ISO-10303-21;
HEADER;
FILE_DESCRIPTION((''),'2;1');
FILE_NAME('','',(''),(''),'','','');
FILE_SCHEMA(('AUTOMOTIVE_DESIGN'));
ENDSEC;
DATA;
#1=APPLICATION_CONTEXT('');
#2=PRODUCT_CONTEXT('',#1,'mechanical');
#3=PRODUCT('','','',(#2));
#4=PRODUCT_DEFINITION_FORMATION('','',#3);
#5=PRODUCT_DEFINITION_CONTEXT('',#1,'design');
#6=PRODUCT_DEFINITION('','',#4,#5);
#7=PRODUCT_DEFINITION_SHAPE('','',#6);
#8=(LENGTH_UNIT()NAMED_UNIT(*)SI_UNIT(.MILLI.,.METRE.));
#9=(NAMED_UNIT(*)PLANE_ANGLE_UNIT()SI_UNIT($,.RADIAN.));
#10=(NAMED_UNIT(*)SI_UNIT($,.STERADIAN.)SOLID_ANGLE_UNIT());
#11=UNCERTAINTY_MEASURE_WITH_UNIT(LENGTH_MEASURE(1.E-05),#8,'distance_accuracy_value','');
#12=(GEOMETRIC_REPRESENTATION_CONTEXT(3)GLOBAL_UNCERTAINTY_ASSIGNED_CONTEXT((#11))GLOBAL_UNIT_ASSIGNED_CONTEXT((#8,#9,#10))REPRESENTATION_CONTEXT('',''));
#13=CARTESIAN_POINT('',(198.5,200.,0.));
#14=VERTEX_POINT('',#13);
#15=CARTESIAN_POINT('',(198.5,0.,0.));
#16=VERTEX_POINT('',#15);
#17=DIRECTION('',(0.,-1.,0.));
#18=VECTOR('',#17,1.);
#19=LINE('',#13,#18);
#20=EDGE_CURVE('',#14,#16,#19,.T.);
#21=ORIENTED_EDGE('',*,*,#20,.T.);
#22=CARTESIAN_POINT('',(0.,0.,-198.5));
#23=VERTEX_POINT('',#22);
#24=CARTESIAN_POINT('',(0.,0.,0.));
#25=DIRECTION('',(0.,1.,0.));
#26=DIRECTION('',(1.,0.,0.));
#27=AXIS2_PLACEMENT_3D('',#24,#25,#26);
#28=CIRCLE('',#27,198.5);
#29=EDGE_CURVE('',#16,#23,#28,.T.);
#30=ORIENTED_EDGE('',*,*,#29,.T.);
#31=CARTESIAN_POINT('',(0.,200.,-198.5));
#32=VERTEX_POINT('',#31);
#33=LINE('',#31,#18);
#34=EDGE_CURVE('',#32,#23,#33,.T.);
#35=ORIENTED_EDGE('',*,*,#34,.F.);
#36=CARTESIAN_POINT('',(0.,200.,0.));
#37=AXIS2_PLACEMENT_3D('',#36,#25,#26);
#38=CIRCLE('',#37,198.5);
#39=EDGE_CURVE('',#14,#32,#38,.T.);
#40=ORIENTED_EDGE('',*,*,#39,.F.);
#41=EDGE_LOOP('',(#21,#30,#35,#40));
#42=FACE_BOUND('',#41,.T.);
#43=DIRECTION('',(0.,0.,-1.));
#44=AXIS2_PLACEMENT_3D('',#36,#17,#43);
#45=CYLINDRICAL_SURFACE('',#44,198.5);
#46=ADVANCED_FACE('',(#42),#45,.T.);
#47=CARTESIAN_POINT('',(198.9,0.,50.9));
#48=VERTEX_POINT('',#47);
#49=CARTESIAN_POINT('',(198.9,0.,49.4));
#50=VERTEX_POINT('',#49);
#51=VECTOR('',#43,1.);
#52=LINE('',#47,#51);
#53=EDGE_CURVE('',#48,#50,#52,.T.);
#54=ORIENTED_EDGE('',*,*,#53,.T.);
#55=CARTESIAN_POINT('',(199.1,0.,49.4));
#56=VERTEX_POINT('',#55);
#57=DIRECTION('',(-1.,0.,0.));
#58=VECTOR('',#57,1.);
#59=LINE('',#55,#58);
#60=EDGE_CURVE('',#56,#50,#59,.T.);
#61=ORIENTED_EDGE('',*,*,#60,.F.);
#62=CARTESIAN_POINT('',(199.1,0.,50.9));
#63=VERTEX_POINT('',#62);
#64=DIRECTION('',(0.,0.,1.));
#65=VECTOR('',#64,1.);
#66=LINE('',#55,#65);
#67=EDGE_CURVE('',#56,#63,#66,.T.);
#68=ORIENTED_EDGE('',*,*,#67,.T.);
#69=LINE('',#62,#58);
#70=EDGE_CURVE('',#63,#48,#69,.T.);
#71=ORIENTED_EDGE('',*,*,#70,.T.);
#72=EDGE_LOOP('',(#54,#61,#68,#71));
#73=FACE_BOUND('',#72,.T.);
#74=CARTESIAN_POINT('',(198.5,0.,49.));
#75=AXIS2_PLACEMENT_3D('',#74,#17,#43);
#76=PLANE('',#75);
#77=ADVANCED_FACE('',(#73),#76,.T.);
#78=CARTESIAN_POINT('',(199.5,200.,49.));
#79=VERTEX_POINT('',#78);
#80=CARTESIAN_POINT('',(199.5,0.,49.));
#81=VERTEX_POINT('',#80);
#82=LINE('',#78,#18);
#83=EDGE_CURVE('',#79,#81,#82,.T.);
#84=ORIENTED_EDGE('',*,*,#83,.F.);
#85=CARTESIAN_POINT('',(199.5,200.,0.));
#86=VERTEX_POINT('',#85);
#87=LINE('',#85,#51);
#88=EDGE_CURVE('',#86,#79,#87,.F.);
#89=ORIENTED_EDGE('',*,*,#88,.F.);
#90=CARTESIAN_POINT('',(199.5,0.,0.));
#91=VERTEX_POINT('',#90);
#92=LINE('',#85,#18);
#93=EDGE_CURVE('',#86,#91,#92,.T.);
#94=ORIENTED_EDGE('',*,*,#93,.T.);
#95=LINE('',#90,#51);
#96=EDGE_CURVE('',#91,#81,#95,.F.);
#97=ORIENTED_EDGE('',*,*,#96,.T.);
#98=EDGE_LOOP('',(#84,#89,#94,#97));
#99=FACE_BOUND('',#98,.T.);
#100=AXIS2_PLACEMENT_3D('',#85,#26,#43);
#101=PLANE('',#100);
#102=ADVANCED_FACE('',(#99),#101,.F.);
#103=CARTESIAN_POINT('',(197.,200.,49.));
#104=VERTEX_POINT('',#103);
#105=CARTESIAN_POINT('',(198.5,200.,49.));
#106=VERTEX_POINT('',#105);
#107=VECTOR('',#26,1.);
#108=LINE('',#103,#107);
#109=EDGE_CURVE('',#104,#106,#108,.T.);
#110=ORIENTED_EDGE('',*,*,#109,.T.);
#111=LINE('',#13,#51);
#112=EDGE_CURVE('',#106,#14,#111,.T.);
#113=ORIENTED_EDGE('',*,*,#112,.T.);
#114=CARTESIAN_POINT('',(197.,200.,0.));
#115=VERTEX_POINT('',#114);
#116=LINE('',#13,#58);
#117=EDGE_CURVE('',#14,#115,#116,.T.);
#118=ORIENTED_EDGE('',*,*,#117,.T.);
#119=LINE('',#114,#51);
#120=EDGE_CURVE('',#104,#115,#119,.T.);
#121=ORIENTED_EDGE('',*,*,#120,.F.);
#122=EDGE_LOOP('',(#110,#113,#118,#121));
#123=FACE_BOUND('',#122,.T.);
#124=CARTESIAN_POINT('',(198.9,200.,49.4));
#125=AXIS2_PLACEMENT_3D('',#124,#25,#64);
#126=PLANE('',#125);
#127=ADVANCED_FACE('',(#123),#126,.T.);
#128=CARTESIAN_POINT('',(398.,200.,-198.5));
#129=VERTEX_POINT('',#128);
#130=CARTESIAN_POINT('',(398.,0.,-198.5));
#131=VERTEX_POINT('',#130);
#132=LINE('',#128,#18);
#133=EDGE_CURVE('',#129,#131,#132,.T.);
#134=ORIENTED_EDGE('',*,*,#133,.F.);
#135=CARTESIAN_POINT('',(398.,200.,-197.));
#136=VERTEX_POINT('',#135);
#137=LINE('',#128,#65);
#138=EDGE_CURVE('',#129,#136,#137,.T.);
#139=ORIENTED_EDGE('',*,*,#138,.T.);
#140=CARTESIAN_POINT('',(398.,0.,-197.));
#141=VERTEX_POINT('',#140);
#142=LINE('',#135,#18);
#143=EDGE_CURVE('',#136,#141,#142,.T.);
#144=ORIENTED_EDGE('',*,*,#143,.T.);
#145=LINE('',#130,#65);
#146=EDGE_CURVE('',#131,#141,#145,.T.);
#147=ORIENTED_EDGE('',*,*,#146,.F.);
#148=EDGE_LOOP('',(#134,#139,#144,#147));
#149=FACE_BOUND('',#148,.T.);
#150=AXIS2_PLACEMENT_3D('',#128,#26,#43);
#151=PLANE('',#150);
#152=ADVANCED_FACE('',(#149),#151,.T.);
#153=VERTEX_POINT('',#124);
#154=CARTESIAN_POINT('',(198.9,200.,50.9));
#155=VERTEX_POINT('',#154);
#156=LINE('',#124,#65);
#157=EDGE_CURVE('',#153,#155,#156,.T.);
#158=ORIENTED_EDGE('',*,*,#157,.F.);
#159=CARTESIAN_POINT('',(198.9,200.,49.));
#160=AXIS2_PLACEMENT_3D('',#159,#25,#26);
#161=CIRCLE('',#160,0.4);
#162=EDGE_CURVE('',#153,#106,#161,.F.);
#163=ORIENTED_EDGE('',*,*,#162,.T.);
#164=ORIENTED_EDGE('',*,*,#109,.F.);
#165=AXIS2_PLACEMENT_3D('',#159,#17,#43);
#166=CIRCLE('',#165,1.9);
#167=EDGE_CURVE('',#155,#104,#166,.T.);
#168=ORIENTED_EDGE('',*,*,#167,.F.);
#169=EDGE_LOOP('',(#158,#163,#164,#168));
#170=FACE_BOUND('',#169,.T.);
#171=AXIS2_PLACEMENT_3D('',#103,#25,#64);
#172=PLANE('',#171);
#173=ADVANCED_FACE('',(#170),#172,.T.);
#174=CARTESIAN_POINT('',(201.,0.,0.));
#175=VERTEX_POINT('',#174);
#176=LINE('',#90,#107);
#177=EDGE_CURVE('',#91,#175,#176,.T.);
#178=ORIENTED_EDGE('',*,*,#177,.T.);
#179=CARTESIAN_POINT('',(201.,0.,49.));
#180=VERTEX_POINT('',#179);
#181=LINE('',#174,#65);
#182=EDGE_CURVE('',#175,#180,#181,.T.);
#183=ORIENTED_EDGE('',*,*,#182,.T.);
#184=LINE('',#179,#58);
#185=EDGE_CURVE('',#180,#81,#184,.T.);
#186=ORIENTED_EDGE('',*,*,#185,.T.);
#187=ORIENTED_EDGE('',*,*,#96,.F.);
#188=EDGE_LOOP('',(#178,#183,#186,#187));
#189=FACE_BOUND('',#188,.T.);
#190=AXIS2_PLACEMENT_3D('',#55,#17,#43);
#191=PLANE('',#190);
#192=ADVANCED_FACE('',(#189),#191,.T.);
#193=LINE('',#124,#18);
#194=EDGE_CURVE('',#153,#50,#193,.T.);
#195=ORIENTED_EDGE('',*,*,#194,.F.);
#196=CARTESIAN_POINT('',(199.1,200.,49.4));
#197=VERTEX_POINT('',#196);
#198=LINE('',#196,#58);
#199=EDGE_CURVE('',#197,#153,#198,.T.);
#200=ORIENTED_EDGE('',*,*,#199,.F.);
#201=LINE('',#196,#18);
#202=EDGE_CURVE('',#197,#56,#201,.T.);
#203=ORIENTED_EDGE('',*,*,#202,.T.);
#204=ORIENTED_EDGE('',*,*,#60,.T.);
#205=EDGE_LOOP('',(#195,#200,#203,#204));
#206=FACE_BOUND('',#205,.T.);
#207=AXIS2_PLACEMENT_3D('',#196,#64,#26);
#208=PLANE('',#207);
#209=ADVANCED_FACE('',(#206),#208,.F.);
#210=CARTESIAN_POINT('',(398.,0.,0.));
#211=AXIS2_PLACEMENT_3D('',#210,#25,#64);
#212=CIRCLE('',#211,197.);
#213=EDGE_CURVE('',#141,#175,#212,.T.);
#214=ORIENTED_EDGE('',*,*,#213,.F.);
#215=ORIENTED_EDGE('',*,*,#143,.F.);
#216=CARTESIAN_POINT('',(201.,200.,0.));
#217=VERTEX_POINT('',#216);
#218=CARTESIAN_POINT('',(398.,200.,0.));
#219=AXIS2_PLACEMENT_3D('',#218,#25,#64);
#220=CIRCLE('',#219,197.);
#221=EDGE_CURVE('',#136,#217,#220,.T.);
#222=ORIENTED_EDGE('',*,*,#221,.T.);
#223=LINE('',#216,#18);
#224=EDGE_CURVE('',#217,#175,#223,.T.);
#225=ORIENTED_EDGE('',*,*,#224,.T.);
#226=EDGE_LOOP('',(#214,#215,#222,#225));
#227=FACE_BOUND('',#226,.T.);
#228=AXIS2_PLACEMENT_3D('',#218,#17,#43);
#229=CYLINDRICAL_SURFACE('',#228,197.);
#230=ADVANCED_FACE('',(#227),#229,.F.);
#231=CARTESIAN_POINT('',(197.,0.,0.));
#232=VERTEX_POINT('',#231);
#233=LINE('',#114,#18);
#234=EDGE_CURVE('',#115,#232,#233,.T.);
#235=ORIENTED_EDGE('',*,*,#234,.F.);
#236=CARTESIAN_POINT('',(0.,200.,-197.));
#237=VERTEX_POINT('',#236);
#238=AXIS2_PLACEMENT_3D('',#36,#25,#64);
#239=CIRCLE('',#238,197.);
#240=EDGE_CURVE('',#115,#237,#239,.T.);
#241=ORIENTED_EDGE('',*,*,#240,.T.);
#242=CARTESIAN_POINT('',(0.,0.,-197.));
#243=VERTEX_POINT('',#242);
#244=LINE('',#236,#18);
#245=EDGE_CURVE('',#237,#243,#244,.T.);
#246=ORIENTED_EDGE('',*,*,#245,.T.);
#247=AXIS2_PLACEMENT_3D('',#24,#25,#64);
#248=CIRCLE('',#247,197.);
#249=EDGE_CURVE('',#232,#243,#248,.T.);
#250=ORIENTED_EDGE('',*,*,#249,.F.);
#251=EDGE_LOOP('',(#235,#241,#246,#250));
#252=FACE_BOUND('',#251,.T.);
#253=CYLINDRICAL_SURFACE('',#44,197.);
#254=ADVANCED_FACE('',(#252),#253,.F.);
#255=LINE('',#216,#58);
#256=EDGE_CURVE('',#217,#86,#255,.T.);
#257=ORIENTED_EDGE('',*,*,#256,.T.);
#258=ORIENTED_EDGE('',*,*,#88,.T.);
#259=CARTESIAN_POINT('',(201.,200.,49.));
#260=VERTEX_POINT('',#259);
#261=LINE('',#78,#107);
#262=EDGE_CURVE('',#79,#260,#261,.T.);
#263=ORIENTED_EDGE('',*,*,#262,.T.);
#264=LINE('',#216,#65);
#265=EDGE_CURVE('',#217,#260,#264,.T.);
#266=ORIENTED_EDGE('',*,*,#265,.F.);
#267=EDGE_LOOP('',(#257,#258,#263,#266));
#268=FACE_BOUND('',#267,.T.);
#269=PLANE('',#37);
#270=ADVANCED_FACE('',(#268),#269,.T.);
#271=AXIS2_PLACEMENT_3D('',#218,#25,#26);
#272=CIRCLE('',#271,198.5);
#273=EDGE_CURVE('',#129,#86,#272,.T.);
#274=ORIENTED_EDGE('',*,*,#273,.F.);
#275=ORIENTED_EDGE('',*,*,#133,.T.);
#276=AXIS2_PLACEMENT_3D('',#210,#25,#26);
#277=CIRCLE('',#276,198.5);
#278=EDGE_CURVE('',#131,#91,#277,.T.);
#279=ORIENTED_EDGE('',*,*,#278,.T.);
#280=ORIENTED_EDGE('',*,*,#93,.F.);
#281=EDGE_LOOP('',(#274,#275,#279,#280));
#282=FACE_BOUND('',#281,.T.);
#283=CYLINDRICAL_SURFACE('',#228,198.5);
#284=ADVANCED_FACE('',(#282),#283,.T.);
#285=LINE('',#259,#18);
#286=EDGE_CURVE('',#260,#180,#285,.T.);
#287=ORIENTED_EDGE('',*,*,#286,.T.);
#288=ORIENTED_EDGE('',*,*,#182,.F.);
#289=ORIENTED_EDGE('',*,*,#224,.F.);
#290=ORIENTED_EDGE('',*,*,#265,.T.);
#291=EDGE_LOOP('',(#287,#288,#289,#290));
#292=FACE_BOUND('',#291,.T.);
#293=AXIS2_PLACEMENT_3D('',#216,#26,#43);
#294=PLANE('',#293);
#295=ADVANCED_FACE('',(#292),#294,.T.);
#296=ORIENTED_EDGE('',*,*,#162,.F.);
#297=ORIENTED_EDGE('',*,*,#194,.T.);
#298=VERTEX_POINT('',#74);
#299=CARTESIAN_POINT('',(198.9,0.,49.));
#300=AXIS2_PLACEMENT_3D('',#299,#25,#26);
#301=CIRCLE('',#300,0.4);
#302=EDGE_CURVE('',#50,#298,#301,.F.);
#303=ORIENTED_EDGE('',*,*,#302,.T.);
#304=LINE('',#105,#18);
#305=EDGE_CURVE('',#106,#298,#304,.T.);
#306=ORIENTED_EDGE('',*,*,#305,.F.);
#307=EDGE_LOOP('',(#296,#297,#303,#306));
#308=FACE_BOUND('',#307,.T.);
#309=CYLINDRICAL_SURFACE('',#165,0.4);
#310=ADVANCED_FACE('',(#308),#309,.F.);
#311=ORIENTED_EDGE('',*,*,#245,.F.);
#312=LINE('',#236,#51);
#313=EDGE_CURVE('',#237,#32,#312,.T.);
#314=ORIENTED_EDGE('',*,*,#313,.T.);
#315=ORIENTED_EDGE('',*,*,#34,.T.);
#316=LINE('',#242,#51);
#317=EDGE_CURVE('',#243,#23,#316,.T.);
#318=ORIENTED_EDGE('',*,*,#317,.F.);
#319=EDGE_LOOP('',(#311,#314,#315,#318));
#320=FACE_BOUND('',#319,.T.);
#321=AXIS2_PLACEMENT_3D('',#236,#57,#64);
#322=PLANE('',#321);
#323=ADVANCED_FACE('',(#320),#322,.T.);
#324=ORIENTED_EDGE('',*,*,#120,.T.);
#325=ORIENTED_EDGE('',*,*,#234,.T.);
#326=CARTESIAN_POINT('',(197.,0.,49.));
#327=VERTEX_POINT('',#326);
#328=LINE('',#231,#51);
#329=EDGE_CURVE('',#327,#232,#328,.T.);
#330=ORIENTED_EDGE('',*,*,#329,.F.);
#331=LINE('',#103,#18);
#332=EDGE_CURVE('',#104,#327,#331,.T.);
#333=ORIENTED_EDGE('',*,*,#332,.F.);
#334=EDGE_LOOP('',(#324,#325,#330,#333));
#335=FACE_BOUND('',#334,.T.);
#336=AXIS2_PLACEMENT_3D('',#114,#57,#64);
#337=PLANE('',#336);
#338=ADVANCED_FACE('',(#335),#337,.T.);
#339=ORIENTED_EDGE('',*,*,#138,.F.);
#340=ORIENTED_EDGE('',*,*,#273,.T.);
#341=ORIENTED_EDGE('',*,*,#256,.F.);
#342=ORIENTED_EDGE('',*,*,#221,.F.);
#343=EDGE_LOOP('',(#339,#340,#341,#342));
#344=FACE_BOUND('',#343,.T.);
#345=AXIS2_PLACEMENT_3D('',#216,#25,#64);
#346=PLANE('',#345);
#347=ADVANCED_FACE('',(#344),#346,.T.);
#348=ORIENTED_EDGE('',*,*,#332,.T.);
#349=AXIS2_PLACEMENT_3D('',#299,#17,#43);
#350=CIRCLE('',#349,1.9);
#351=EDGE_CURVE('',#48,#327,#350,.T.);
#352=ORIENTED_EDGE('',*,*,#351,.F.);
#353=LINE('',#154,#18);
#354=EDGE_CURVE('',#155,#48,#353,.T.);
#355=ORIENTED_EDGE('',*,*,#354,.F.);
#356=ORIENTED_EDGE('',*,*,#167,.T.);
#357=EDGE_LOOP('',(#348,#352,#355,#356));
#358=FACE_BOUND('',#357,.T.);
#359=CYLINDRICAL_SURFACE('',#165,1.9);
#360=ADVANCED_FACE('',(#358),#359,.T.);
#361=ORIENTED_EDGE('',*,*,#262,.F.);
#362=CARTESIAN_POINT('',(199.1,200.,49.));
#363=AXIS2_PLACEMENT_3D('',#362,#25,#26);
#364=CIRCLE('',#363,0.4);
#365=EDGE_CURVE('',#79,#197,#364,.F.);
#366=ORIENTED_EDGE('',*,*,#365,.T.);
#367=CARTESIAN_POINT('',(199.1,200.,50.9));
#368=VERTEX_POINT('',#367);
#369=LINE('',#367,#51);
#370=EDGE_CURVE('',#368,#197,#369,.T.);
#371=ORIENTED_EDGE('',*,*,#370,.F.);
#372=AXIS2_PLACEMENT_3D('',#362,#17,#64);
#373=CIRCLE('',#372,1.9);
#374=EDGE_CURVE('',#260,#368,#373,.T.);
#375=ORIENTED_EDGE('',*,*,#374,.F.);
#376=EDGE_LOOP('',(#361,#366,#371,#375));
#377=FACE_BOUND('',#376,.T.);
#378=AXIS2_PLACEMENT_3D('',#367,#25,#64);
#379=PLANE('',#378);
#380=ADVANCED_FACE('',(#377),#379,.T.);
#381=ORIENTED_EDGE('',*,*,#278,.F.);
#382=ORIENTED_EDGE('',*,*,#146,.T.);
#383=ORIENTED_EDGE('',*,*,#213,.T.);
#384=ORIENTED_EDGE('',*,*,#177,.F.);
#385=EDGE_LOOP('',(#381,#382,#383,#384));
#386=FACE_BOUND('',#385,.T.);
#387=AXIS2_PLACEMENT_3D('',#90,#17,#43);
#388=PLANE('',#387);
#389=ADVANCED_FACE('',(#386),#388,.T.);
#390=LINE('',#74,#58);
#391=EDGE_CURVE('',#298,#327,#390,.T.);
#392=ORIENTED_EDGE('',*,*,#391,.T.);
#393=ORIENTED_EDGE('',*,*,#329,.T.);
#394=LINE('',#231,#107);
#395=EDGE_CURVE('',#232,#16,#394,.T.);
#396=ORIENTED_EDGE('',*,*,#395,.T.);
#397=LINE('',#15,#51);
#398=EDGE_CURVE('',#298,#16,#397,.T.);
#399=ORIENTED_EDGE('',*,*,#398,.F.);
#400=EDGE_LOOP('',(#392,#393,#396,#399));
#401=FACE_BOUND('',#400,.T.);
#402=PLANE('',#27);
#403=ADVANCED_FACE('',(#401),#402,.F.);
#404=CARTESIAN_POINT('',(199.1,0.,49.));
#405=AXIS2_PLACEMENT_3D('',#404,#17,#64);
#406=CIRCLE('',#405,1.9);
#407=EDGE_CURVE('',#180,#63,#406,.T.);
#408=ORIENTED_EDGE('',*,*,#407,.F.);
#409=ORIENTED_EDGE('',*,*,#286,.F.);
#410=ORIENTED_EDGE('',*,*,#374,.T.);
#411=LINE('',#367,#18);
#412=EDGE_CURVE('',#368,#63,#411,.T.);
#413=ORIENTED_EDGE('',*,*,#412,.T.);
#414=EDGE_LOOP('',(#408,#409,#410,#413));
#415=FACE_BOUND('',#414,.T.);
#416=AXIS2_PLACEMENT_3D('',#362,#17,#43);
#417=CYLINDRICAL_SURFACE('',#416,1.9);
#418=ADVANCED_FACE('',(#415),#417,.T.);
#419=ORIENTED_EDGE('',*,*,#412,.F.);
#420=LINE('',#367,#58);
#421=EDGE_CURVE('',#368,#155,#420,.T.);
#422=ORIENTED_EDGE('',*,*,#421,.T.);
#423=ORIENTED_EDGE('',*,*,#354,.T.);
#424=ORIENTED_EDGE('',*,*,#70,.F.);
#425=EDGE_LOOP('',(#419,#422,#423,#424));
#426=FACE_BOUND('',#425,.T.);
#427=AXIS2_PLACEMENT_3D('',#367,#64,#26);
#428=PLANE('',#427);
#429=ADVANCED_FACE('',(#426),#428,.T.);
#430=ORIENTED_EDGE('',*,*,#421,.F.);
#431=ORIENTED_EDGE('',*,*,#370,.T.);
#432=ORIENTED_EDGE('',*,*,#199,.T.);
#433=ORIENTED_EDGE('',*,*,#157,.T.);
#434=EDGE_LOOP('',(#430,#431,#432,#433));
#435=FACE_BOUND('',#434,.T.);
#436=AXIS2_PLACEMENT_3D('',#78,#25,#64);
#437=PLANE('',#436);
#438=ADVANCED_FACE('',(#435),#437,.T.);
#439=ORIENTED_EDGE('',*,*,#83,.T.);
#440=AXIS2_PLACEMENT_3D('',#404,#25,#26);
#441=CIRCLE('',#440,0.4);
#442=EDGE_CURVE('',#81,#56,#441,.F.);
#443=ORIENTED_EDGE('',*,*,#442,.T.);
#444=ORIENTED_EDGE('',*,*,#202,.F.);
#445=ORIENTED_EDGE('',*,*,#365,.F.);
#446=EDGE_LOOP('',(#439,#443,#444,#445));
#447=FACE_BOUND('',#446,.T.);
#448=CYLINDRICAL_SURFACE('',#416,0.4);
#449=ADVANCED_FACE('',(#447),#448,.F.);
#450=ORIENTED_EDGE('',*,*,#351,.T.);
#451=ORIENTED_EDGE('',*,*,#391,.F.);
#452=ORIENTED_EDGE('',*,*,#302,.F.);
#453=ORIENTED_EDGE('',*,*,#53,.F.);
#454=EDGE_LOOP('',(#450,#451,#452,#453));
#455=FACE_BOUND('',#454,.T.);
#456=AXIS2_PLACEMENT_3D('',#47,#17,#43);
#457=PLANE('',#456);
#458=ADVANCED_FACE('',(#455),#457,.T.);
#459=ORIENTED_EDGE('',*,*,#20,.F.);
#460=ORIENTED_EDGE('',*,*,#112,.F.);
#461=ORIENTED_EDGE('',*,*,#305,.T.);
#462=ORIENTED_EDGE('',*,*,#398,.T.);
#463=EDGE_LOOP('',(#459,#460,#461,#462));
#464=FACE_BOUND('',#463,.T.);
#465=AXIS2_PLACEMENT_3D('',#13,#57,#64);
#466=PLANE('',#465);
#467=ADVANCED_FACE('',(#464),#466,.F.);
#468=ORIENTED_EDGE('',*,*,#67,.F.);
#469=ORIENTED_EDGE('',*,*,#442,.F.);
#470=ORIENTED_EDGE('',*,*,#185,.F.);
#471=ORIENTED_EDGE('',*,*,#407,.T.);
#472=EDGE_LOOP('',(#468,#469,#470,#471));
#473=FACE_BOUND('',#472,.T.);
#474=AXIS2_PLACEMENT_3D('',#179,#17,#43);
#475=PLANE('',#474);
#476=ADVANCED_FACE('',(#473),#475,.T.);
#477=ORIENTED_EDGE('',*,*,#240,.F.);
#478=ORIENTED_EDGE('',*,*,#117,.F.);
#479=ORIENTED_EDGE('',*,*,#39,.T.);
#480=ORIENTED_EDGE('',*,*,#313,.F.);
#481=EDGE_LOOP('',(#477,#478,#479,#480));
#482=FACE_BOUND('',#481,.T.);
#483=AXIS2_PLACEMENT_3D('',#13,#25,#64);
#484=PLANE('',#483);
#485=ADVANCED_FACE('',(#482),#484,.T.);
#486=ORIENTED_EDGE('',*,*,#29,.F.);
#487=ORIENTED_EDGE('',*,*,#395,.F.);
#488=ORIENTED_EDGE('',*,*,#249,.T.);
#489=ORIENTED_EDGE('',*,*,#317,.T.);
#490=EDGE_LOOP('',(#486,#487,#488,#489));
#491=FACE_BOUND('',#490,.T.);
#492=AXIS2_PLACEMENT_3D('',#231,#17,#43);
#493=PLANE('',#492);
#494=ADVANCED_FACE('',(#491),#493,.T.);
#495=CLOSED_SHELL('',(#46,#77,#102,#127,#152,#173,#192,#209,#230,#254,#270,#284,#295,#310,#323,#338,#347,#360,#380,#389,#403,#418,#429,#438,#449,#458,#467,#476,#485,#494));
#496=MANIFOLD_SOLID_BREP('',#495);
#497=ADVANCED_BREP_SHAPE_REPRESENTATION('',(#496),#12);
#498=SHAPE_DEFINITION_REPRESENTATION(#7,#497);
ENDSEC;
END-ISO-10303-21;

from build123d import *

# Parameters (mm, degrees)
BASE_FLANGE5_DEPTH = 200


# Sheet-metal steps are written as plain solids
with BuildPart() as part:
    # Sketch1 → Base-Flange5 (new body)
    with BuildSketch(Plane(origin=(0, 0, 0), x_dir=(1, 0, 0), z_dir=(0, 1, 0))):
        with BuildLine():
            ThreePointArc((398, 197), (258.699964106, 139.300035894), (201, 0))
            Line((201, 0), (201, -49))
            ThreePointArc((201, -49), (200.443502884, -50.343502884), (199.1, -50.9))
            Line((199.1, -50.9), (198.9, -50.9))
            ThreePointArc((198.9, -50.9), (197.556497116, -50.343502884), (197, -49))
            Line((197, -49), (197, 0))
            ThreePointArc((197, 0), (139.300035894, 139.300035894), (0, 197))
            Line((0, 197), (0, 198.5))
            ThreePointArc((0, 198.5), (140.360696066, 140.360696066), (198.5, 0))
            Line((198.5, 0), (198.5, -49))
            ThreePointArc((198.5, -49), (198.617157288, -49.282842712), (198.9, -49.4))
            Line((198.9, -49.4), (199.1, -49.4))
            ThreePointArc((199.1, -49.4), (199.382842712, -49.282842712), (199.5, -49))
            Line((199.5, -49), (199.5, 0))
            ThreePointArc((199.5, 0), (257.639303934, 140.360696066), (398, 198.5))
            Line((398, 198.5), (398, 197))
        make_face()
    extrude(amount=BASE_FLANGE5_DEPTH)


solid = part.part
